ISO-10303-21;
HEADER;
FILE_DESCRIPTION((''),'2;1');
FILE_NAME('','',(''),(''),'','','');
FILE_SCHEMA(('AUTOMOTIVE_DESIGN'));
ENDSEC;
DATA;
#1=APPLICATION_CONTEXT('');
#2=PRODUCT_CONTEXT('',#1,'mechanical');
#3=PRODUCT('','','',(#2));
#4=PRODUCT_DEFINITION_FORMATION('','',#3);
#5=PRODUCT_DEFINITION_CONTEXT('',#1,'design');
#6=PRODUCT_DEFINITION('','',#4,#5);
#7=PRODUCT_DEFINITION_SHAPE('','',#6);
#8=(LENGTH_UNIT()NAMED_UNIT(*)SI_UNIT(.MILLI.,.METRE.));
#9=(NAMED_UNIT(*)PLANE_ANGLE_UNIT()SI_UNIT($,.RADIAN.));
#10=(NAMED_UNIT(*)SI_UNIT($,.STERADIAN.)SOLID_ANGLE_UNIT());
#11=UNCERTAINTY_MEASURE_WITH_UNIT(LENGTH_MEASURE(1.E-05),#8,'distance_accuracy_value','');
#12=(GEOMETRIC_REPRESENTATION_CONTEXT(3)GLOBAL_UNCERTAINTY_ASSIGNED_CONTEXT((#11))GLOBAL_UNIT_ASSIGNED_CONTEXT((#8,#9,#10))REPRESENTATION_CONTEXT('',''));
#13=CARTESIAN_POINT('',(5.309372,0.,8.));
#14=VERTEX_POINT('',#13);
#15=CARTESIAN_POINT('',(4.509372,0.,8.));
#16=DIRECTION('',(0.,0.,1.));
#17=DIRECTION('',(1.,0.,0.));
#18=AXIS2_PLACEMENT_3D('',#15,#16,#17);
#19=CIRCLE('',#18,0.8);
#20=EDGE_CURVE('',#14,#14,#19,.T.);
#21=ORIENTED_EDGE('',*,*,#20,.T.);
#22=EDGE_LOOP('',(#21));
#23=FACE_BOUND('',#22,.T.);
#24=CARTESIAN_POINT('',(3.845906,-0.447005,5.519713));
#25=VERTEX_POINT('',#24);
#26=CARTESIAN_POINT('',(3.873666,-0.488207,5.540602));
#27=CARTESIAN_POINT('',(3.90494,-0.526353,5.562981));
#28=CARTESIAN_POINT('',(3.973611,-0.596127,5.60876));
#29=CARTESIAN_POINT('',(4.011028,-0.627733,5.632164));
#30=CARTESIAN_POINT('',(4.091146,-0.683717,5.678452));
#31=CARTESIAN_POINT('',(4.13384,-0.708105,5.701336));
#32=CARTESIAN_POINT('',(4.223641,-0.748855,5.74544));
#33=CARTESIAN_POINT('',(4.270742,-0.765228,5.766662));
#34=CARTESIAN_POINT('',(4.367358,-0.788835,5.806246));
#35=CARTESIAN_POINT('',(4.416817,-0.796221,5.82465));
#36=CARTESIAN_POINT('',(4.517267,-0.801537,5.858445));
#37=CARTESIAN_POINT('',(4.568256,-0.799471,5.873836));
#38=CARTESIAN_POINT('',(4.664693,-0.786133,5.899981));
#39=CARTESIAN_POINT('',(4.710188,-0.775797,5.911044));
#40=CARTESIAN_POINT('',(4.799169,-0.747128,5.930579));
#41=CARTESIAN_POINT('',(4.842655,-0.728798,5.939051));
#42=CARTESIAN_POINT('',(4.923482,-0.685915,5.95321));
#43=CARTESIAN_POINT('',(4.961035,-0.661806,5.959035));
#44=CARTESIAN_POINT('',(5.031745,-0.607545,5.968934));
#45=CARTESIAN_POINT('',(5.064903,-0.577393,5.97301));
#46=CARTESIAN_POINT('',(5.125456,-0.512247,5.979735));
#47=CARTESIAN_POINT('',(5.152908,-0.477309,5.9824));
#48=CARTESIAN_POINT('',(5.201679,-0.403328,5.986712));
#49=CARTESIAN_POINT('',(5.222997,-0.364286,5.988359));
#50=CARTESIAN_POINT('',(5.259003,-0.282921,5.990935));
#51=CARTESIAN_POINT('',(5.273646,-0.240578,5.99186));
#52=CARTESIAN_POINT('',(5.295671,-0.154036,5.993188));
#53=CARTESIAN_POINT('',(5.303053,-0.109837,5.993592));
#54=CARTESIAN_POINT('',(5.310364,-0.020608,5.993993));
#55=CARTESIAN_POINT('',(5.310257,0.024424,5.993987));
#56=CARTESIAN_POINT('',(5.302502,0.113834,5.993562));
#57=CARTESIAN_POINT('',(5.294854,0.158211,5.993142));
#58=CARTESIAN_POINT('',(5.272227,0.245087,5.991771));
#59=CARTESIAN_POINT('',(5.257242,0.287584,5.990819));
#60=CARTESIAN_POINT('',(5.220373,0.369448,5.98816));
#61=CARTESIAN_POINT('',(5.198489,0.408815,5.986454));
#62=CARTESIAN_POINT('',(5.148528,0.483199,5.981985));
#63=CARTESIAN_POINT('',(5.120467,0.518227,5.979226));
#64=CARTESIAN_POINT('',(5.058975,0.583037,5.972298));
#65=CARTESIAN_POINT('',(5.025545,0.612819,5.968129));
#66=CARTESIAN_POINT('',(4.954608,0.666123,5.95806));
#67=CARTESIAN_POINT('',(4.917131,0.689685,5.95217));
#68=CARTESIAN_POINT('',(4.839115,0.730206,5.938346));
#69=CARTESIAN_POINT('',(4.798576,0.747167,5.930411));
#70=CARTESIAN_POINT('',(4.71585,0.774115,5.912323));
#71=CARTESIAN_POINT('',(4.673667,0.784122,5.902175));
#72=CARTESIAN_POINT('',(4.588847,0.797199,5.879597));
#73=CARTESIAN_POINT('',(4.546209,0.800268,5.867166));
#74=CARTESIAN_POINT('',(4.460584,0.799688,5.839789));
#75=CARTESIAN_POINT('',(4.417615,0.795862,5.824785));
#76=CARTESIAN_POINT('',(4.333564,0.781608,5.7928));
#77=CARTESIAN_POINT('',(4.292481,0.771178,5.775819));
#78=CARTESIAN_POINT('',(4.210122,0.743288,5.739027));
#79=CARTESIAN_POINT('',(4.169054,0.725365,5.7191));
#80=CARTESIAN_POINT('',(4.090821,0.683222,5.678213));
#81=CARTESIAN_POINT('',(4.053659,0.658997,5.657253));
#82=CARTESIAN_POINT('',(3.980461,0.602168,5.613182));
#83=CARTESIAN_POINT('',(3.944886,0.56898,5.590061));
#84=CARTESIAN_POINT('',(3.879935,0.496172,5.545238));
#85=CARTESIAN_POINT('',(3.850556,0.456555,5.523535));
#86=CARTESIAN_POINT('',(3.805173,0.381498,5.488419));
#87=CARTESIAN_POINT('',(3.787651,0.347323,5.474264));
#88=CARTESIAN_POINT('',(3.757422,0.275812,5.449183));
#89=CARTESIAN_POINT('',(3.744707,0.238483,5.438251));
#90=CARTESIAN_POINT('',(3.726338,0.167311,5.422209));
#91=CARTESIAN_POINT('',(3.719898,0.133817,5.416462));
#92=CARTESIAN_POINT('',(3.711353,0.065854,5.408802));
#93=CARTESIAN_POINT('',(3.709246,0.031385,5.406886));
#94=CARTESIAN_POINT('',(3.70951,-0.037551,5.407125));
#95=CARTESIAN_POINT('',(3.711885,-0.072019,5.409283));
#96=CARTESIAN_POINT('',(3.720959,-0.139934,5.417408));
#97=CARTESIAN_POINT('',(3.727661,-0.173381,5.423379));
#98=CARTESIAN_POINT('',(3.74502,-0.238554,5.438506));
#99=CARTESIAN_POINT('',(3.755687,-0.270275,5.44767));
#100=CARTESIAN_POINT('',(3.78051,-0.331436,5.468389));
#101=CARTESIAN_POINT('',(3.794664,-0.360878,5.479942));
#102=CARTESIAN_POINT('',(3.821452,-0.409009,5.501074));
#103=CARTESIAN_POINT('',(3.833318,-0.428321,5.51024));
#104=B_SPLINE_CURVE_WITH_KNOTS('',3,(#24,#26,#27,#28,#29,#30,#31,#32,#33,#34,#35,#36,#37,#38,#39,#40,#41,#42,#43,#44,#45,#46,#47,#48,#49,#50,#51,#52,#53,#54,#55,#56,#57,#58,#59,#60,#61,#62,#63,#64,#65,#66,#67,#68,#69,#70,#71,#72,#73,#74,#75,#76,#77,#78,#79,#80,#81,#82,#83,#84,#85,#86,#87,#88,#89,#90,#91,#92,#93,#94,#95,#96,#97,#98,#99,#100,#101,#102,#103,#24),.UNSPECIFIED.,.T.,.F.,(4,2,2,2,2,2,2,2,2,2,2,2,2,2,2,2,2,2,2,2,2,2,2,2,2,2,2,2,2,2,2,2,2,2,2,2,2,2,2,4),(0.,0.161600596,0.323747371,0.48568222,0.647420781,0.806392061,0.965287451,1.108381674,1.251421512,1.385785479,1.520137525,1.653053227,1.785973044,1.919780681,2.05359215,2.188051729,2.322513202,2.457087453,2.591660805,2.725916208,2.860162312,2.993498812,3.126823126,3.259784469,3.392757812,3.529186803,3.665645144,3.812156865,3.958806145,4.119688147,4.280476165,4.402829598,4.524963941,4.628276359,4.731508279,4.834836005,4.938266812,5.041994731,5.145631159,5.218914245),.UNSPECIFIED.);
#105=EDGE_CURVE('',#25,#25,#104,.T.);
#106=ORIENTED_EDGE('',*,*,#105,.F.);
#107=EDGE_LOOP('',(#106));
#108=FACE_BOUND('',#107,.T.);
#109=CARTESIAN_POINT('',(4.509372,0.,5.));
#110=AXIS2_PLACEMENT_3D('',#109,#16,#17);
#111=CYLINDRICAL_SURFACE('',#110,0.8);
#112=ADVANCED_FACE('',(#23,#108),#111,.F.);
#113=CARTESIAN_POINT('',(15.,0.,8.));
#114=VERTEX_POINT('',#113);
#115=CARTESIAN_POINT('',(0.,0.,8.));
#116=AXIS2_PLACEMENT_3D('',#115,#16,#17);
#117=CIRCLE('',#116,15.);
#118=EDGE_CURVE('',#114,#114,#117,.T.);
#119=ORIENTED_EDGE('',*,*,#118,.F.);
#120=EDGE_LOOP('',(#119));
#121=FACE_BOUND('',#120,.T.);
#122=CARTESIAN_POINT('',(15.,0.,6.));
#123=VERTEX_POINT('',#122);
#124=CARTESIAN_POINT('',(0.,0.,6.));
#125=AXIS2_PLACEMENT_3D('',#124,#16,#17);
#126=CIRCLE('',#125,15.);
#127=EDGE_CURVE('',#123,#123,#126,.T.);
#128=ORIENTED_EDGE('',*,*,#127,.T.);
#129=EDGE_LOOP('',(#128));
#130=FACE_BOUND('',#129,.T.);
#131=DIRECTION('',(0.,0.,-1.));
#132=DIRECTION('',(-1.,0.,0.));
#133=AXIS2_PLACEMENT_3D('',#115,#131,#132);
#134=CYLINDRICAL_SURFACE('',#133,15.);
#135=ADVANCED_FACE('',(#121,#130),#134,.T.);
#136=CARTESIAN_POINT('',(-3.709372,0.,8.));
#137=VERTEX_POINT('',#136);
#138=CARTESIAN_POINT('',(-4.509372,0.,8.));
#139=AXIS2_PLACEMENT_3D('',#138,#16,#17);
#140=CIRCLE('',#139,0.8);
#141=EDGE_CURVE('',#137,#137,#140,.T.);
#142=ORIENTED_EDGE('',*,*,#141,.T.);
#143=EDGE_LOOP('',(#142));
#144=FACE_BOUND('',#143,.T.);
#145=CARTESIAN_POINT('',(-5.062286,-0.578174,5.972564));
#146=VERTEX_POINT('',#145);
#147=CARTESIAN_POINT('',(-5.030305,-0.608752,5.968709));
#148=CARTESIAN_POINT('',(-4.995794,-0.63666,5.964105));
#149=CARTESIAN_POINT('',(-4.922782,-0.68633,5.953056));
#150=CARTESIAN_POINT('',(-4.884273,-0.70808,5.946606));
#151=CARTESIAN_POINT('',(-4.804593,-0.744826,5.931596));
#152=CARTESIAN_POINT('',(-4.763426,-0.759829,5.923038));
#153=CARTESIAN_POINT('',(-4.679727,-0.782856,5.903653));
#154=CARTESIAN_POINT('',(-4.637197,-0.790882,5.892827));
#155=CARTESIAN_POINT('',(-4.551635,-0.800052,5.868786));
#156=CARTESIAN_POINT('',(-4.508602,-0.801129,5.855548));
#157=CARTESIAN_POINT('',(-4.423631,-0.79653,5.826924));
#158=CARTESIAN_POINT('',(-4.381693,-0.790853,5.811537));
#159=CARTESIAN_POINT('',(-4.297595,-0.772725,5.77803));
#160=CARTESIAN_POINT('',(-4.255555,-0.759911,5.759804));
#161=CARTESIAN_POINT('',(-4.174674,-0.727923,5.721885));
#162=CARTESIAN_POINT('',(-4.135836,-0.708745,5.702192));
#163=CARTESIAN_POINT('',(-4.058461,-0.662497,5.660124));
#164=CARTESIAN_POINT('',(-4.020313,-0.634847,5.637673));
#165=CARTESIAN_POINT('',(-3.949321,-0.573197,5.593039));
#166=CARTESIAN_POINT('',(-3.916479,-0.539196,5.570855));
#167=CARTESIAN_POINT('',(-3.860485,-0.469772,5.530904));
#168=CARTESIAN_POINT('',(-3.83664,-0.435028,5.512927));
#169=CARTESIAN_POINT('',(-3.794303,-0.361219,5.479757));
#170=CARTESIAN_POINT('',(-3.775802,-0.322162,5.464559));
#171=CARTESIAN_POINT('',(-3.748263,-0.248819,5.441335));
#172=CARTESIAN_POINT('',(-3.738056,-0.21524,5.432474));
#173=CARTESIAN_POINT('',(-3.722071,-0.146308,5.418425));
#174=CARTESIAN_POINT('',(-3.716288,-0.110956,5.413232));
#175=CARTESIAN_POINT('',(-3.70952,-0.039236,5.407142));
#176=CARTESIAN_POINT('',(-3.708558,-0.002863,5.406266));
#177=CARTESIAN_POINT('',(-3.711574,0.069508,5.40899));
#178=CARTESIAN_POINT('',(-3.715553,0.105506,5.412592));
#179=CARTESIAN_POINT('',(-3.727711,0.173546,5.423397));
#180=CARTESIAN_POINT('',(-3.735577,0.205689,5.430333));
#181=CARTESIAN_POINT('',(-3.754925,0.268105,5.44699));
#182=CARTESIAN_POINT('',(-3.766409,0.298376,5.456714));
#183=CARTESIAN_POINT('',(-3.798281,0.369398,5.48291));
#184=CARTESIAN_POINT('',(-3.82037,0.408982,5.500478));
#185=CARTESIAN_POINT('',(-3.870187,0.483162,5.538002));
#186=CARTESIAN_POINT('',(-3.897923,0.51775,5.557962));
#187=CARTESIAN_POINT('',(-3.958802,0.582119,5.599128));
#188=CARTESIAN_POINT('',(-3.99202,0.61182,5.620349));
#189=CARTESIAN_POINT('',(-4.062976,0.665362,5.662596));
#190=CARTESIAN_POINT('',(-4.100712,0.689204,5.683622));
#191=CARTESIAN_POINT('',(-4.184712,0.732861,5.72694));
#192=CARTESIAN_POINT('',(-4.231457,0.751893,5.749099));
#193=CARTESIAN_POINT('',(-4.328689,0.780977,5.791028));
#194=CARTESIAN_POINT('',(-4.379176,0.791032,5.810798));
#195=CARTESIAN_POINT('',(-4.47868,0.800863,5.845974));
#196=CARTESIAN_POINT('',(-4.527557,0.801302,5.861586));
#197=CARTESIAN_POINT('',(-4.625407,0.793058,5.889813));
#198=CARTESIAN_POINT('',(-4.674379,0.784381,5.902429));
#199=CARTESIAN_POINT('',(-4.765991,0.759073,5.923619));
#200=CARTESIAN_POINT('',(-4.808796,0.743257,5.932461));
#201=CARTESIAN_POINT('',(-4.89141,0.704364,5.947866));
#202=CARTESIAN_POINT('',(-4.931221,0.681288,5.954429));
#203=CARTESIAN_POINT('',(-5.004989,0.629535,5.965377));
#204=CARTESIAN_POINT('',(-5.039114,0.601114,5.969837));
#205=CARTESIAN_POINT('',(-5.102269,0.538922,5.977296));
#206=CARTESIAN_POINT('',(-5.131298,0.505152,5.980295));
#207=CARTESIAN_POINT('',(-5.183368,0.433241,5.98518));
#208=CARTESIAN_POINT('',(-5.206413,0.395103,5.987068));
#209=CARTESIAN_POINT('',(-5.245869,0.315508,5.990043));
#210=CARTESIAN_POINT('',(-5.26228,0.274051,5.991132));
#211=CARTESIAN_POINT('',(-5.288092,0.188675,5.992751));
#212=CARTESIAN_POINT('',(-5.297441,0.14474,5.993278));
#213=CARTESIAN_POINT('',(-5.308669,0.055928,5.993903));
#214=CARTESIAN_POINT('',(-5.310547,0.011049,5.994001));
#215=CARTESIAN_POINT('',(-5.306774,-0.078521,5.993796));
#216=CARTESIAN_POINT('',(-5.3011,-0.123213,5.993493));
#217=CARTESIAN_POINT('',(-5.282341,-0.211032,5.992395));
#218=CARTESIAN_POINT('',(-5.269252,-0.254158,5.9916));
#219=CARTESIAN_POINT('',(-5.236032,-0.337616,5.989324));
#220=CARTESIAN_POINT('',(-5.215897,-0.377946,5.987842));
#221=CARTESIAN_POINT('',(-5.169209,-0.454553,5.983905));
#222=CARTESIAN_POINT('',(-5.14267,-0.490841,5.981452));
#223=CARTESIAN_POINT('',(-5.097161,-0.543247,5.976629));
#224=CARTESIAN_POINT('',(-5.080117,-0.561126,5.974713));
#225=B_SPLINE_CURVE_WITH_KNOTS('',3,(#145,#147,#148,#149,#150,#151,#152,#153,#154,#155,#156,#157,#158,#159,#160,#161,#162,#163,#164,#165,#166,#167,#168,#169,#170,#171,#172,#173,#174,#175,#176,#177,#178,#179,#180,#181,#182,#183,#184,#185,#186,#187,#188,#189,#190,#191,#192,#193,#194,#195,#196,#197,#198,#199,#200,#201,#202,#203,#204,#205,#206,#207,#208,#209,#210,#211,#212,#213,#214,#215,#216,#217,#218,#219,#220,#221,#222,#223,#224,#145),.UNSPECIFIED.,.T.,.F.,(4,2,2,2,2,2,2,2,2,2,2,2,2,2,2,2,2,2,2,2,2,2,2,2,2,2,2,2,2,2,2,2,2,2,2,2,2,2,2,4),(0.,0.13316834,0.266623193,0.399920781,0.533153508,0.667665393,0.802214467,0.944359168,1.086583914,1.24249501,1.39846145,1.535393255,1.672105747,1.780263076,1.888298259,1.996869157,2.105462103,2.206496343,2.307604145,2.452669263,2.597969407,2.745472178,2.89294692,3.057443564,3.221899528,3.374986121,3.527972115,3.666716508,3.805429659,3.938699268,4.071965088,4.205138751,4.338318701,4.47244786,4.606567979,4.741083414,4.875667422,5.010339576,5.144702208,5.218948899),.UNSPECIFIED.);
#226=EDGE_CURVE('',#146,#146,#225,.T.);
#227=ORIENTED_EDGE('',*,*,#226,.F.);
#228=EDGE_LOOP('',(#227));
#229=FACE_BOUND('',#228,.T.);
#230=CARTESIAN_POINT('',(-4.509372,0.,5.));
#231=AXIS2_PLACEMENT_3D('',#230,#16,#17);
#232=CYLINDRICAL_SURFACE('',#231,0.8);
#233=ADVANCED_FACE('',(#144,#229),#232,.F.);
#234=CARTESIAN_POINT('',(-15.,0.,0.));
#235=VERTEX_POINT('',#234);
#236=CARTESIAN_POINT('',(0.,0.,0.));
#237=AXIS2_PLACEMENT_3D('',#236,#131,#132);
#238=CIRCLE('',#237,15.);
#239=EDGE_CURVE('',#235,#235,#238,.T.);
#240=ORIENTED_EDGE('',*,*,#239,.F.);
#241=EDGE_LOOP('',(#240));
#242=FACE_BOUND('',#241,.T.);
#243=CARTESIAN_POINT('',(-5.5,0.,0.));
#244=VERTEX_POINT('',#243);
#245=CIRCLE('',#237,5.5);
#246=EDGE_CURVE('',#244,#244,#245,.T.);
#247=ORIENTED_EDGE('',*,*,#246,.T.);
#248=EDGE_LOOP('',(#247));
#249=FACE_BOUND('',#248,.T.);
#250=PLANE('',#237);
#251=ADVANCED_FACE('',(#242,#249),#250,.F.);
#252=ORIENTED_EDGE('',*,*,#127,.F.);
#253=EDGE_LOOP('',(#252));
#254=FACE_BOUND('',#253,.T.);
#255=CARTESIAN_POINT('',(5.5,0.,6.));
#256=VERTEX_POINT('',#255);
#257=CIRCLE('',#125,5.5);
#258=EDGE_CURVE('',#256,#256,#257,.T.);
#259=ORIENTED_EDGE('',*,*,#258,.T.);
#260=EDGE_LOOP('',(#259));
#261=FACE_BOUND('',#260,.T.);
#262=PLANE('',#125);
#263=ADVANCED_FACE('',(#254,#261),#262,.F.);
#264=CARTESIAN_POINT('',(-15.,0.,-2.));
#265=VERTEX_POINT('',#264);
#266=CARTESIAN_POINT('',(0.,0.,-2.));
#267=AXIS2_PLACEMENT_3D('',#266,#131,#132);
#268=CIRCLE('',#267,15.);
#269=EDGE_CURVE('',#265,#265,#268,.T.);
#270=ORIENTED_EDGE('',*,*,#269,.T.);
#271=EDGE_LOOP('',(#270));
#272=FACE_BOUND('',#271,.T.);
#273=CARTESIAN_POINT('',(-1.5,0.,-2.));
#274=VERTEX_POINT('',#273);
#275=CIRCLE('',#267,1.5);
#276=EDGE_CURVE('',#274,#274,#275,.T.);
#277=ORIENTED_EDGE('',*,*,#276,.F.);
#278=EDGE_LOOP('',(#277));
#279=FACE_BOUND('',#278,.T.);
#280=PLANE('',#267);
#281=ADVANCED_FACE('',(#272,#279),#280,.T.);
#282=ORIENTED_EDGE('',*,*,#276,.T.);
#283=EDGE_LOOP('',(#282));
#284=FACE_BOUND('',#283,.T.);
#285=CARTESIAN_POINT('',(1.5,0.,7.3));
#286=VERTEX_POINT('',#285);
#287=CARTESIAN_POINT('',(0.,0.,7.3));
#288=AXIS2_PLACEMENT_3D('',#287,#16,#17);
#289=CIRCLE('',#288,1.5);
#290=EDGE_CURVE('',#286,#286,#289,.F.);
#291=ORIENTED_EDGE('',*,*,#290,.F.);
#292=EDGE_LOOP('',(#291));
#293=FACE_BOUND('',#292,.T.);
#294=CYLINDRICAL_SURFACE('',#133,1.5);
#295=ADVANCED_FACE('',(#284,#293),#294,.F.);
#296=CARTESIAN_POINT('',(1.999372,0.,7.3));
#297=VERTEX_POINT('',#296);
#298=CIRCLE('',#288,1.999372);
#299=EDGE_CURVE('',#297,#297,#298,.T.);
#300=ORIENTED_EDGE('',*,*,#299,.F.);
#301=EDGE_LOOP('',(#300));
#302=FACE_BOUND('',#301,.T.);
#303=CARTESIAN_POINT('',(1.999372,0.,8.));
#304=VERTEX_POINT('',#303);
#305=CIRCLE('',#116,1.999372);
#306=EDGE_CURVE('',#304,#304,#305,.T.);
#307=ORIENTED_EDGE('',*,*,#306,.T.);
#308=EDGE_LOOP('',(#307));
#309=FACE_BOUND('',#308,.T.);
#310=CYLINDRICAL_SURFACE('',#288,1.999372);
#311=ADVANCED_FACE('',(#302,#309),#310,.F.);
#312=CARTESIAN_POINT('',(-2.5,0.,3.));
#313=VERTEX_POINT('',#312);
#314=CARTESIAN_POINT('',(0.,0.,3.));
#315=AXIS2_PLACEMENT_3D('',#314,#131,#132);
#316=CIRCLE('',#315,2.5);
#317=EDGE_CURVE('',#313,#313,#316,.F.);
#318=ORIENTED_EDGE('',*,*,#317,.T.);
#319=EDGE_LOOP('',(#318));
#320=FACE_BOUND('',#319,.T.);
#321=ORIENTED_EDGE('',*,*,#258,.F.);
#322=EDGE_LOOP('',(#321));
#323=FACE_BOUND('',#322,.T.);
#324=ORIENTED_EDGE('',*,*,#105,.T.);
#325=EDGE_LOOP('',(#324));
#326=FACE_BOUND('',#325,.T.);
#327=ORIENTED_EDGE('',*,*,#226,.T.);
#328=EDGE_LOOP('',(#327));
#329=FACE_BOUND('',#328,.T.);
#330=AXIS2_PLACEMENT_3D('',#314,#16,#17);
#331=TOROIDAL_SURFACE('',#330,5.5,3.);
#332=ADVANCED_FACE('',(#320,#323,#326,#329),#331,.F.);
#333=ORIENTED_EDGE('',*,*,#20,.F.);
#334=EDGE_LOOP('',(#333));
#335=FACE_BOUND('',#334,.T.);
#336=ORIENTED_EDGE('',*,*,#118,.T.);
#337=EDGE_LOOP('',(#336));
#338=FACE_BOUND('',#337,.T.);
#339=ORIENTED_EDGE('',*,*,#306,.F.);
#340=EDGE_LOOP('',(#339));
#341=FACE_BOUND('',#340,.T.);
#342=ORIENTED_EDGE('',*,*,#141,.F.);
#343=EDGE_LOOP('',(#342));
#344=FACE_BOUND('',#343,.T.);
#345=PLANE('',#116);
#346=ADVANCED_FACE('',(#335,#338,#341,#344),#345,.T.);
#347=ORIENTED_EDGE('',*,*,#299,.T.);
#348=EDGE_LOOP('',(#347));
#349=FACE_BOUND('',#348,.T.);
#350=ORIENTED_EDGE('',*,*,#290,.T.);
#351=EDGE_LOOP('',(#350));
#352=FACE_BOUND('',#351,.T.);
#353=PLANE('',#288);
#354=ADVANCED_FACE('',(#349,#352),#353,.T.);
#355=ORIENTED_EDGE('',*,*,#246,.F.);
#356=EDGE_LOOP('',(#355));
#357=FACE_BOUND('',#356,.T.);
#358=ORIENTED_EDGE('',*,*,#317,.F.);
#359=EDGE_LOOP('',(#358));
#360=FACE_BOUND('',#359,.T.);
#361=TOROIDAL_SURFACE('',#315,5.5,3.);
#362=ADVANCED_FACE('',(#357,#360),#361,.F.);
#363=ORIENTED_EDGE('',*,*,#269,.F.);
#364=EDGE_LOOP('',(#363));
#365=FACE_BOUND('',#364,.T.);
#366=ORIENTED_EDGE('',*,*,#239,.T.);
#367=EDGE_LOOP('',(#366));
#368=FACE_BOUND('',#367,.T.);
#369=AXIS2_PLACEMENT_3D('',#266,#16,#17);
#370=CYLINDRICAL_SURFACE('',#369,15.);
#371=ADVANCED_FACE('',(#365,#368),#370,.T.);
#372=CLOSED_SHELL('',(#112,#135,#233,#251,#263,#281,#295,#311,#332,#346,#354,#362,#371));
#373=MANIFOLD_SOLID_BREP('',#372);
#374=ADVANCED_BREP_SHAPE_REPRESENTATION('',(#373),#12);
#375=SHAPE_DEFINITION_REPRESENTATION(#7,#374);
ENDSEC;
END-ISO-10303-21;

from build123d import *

# Parameters (mm, degrees)
SKETCH1_R           = 2.5
BOSS_EXTRUDE1_DEPTH = 6
SKETCH2_R           = 15
BOSS_EXTRUDE2_DEPTH = 2
BOSS_EXTRUDE3_START = 2
SKETCH3_R           = 15
BOSS_EXTRUDE3_DEPTH = 2
FILLET9_R           = 3
FILLET10_R          = 3
SKETCH4_R           = 1.5
CUT_EXTRUDE1_DEPTH  = 10
SKETCH5_R           = 1.999371682
CUT_EXTRUDE2_DEPTH  = 0.7
SKETCH7_R           = 0.8
CUT_EXTRUDE6_DEPTH  = 3


with BuildPart() as part:
    # Sketch1 → Boss-Extrude1 (new body)
    with BuildSketch(Plane.XY):
        Circle(SKETCH1_R)
    extrude(amount=BOSS_EXTRUDE1_DEPTH)

    # Sketch2 → Boss-Extrude2 (add)
    with BuildSketch(Plane(origin=(0, 0, 0), x_dir=(-1, 0, 0), z_dir=(0, 0, -1))):
        Circle(SKETCH2_R)
    extrude(amount=BOSS_EXTRUDE2_DEPTH)

    # Sketch3 → Boss-Extrude3 (add)
    with BuildSketch(Plane.XY.offset(6).offset(BOSS_EXTRUDE3_START)):
        with Locations(Location((0, 0, 0), (0, 0, 180))):
            Circle(SKETCH3_R)
    extrude(amount=-BOSS_EXTRUDE3_DEPTH)

    # Fillet9
    fillet9_edges = [part.edges().sort_by_distance(p)[0] for p in [
        (-2.5, 0, 0),
    ]]
    fillet(fillet9_edges, radius=FILLET9_R)

    # Fillet10
    fillet10_edges = [part.edges().sort_by_distance(p)[0] for p in [
        (-2.5, 0, 6),
    ]]
    fillet(fillet10_edges, radius=FILLET10_R - 0.0001)  # a hair under: the kernel refuses the full size

    # Sketch4 → Cut-Extrude1 (cut)
    with BuildSketch(Plane(origin=(0, 0, -2), x_dir=(-1, 0, 0), z_dir=(0, 0, -1))):
        Circle(SKETCH4_R)
    extrude(amount=-CUT_EXTRUDE1_DEPTH, mode=Mode.SUBTRACT)

    # Sketch5 → Cut-Extrude2 (cut)
    with BuildSketch(Plane.XY.offset(8)):
        Circle(SKETCH5_R)
    extrude(amount=-CUT_EXTRUDE2_DEPTH, mode=Mode.SUBTRACT)

    # Sketch7 → Cut-Extrude6 (cut)
    with BuildSketch(Plane.XY.offset(8)):
        with Locations((4.509371682, 0)):
            Circle(SKETCH7_R)
        with Locations((-4.509371682, 0)):
            Circle(SKETCH7_R)
    extrude(amount=-CUT_EXTRUDE6_DEPTH, mode=Mode.SUBTRACT)


solid = part.part
